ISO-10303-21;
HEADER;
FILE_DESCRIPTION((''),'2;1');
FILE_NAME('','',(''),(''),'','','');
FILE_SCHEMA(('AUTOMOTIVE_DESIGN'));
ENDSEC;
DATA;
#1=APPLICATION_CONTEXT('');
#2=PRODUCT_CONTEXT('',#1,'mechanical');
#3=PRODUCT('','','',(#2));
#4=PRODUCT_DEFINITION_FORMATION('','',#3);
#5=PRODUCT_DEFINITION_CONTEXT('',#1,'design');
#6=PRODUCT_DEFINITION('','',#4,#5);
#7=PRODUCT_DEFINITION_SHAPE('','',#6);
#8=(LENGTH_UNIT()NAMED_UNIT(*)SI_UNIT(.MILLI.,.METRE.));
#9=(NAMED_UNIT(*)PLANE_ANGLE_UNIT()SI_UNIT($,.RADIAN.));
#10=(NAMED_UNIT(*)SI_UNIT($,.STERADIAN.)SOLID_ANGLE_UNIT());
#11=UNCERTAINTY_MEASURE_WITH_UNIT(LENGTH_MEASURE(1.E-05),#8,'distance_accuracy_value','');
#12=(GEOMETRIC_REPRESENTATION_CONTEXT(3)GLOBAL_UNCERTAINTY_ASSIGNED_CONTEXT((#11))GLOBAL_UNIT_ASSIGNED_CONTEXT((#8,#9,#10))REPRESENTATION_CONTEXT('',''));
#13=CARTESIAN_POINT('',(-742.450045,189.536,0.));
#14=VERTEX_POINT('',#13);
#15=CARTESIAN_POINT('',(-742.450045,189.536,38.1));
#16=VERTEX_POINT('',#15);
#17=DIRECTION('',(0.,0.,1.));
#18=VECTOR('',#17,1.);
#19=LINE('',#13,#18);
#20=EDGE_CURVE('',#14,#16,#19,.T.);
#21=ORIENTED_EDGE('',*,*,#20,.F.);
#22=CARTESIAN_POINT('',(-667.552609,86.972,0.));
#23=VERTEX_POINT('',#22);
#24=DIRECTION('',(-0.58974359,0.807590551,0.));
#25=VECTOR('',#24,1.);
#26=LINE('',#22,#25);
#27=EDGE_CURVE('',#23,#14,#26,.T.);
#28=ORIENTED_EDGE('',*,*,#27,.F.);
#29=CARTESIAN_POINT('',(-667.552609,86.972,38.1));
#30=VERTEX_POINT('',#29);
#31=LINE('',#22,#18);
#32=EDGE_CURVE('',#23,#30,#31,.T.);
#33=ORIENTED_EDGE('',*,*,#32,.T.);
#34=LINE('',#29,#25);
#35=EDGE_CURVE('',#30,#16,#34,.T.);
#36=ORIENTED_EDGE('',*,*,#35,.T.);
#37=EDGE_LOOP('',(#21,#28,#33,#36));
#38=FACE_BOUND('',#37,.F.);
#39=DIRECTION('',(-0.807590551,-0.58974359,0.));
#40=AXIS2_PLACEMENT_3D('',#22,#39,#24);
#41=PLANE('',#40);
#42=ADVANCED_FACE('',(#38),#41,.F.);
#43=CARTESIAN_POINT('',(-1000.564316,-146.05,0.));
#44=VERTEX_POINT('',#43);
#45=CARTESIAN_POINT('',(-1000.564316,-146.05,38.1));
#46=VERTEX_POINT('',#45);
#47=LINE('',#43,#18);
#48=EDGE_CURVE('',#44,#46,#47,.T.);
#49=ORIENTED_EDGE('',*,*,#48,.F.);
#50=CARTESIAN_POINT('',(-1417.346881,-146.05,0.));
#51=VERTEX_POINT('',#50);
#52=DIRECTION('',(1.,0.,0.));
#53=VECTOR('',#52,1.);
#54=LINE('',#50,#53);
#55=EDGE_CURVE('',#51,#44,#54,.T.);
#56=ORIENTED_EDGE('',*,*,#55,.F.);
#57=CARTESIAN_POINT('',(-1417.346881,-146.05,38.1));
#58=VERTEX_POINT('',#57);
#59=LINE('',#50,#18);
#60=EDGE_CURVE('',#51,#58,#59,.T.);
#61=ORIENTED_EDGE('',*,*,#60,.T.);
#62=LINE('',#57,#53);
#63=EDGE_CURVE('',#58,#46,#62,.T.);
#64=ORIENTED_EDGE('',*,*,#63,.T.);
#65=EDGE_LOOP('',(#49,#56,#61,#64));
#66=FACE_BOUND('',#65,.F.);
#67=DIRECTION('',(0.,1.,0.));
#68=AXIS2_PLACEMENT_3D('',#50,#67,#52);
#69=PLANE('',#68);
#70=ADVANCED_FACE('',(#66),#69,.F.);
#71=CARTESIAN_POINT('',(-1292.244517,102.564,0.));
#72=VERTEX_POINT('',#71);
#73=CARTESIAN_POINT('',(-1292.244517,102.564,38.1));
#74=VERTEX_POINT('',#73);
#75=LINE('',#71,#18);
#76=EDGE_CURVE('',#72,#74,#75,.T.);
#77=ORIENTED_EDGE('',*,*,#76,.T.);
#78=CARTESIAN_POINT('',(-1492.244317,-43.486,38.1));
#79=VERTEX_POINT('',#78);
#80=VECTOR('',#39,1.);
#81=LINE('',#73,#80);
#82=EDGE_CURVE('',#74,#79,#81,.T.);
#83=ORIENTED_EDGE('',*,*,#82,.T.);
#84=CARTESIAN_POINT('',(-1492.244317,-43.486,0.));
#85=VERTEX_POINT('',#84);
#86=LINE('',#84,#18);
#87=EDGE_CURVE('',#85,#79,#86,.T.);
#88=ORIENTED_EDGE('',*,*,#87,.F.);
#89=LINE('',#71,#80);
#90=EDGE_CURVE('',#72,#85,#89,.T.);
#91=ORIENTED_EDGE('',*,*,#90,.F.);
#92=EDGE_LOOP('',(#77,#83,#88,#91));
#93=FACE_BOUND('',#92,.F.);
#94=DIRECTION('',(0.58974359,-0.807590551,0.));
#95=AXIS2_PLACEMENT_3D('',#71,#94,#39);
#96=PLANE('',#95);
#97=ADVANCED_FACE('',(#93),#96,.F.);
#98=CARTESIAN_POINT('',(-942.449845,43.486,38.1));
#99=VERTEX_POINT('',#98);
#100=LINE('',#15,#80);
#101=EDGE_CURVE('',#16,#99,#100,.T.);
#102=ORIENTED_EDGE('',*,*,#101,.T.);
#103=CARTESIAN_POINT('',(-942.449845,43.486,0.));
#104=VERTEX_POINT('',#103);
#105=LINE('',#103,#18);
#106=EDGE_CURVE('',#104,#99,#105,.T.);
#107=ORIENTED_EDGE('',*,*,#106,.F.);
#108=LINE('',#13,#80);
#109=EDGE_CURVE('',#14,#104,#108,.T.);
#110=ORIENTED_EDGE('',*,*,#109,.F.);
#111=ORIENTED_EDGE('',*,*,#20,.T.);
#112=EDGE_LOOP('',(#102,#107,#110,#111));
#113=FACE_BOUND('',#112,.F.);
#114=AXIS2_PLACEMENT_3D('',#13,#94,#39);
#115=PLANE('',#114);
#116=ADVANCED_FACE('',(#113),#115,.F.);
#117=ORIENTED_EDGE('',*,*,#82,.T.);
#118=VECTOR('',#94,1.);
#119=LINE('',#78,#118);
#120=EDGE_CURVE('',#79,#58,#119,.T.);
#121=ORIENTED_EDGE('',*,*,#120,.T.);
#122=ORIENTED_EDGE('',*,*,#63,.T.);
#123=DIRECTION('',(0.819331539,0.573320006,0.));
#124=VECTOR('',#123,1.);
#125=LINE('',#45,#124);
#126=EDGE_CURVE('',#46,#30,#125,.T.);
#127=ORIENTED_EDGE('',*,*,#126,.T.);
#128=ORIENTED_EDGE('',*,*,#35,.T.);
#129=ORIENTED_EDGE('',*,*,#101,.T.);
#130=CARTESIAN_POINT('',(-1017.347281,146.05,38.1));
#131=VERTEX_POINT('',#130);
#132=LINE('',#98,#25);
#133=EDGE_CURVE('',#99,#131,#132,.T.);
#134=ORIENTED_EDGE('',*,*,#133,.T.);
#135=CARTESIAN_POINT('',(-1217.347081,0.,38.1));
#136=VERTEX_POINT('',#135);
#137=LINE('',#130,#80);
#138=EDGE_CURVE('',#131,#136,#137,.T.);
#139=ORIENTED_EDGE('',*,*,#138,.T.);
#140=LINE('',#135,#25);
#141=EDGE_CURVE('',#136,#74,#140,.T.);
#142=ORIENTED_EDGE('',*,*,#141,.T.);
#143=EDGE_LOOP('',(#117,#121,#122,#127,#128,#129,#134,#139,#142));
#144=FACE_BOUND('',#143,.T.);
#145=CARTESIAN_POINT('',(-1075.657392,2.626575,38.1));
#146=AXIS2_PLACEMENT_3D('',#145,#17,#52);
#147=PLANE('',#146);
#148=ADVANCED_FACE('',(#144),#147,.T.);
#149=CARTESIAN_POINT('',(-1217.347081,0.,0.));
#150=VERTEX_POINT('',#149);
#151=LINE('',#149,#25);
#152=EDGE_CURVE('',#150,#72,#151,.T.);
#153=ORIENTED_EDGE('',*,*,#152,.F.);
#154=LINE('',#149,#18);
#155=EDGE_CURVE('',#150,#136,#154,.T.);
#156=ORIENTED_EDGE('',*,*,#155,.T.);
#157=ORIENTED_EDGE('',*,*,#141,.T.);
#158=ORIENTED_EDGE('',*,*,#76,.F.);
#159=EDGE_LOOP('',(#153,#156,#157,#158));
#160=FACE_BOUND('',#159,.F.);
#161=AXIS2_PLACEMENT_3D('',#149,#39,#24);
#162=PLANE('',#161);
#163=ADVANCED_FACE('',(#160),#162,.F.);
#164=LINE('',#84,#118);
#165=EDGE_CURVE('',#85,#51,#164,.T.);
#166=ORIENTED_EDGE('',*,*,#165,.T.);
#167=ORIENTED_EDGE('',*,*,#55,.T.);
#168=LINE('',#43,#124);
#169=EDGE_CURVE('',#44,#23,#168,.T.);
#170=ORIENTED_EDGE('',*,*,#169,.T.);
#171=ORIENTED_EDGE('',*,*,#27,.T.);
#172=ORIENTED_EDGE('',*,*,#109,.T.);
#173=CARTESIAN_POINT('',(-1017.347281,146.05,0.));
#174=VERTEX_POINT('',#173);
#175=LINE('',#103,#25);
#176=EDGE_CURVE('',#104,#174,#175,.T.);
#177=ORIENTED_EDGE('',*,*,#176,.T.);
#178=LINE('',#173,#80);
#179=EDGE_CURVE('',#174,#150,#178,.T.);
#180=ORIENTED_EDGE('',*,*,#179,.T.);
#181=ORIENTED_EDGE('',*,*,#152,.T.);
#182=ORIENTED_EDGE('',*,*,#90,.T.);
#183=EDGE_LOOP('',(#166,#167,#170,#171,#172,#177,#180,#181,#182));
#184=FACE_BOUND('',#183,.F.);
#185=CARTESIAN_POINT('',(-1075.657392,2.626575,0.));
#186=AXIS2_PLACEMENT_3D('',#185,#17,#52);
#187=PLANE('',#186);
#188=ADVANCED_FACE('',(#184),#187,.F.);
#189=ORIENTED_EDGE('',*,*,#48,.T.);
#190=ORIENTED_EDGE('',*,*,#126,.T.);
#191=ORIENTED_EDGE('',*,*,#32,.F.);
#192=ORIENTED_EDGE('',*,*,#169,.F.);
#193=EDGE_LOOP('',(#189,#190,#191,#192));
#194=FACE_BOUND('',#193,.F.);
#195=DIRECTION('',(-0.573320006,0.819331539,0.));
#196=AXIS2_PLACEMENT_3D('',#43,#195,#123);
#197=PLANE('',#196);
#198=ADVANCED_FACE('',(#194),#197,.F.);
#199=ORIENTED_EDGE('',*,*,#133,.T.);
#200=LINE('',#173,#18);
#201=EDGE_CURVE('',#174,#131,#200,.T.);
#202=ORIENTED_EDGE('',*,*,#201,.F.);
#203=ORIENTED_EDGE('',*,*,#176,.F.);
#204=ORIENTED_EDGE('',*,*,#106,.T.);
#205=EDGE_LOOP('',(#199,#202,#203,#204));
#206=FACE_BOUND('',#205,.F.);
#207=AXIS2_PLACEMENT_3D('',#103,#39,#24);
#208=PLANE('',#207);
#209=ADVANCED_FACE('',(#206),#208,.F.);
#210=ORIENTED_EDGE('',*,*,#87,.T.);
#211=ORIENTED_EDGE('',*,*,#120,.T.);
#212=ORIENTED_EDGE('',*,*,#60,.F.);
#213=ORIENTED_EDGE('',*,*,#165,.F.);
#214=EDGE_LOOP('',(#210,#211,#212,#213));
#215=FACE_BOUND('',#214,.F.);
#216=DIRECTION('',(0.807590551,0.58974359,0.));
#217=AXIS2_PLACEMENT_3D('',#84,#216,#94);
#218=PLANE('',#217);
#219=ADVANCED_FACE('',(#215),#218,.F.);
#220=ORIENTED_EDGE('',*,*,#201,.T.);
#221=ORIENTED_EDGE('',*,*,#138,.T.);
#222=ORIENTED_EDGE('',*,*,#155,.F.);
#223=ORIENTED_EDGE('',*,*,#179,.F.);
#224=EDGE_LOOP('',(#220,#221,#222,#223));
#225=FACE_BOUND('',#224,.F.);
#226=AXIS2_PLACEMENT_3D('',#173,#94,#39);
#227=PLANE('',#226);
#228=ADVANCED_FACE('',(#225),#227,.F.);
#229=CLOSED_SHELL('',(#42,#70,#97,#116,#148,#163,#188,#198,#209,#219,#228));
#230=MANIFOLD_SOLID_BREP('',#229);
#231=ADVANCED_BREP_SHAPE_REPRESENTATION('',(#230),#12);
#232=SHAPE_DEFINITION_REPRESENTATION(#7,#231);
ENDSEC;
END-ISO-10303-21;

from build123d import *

# Parameters (mm, degrees)
F1_DEPTH = 38.1


# Not quite as in the source:
# - a feature of the source that left no trace in its solid (it failed there, or was rolled back) is left out


with BuildPart() as f1:
    # F0 (on Top) → F1 (new body)
    with BuildSketch(Plane.XY):
        Polygon((-1217.3470808469, 0), (-1292.2445167444, 102.564), (-1492.2443167443, -43.486), (-1417.3468808468, -146.05), (-1000.5643164725, -146.05), (-667.5526090523, 86.9720000001), (-710.694361694, 146.05), (-742.4500449497, 189.536), (-942.4498449496, 43.486), (-1017.347280847, 146.05), align=None)
    extrude(amount=F1_DEPTH)


solid = f1.part
